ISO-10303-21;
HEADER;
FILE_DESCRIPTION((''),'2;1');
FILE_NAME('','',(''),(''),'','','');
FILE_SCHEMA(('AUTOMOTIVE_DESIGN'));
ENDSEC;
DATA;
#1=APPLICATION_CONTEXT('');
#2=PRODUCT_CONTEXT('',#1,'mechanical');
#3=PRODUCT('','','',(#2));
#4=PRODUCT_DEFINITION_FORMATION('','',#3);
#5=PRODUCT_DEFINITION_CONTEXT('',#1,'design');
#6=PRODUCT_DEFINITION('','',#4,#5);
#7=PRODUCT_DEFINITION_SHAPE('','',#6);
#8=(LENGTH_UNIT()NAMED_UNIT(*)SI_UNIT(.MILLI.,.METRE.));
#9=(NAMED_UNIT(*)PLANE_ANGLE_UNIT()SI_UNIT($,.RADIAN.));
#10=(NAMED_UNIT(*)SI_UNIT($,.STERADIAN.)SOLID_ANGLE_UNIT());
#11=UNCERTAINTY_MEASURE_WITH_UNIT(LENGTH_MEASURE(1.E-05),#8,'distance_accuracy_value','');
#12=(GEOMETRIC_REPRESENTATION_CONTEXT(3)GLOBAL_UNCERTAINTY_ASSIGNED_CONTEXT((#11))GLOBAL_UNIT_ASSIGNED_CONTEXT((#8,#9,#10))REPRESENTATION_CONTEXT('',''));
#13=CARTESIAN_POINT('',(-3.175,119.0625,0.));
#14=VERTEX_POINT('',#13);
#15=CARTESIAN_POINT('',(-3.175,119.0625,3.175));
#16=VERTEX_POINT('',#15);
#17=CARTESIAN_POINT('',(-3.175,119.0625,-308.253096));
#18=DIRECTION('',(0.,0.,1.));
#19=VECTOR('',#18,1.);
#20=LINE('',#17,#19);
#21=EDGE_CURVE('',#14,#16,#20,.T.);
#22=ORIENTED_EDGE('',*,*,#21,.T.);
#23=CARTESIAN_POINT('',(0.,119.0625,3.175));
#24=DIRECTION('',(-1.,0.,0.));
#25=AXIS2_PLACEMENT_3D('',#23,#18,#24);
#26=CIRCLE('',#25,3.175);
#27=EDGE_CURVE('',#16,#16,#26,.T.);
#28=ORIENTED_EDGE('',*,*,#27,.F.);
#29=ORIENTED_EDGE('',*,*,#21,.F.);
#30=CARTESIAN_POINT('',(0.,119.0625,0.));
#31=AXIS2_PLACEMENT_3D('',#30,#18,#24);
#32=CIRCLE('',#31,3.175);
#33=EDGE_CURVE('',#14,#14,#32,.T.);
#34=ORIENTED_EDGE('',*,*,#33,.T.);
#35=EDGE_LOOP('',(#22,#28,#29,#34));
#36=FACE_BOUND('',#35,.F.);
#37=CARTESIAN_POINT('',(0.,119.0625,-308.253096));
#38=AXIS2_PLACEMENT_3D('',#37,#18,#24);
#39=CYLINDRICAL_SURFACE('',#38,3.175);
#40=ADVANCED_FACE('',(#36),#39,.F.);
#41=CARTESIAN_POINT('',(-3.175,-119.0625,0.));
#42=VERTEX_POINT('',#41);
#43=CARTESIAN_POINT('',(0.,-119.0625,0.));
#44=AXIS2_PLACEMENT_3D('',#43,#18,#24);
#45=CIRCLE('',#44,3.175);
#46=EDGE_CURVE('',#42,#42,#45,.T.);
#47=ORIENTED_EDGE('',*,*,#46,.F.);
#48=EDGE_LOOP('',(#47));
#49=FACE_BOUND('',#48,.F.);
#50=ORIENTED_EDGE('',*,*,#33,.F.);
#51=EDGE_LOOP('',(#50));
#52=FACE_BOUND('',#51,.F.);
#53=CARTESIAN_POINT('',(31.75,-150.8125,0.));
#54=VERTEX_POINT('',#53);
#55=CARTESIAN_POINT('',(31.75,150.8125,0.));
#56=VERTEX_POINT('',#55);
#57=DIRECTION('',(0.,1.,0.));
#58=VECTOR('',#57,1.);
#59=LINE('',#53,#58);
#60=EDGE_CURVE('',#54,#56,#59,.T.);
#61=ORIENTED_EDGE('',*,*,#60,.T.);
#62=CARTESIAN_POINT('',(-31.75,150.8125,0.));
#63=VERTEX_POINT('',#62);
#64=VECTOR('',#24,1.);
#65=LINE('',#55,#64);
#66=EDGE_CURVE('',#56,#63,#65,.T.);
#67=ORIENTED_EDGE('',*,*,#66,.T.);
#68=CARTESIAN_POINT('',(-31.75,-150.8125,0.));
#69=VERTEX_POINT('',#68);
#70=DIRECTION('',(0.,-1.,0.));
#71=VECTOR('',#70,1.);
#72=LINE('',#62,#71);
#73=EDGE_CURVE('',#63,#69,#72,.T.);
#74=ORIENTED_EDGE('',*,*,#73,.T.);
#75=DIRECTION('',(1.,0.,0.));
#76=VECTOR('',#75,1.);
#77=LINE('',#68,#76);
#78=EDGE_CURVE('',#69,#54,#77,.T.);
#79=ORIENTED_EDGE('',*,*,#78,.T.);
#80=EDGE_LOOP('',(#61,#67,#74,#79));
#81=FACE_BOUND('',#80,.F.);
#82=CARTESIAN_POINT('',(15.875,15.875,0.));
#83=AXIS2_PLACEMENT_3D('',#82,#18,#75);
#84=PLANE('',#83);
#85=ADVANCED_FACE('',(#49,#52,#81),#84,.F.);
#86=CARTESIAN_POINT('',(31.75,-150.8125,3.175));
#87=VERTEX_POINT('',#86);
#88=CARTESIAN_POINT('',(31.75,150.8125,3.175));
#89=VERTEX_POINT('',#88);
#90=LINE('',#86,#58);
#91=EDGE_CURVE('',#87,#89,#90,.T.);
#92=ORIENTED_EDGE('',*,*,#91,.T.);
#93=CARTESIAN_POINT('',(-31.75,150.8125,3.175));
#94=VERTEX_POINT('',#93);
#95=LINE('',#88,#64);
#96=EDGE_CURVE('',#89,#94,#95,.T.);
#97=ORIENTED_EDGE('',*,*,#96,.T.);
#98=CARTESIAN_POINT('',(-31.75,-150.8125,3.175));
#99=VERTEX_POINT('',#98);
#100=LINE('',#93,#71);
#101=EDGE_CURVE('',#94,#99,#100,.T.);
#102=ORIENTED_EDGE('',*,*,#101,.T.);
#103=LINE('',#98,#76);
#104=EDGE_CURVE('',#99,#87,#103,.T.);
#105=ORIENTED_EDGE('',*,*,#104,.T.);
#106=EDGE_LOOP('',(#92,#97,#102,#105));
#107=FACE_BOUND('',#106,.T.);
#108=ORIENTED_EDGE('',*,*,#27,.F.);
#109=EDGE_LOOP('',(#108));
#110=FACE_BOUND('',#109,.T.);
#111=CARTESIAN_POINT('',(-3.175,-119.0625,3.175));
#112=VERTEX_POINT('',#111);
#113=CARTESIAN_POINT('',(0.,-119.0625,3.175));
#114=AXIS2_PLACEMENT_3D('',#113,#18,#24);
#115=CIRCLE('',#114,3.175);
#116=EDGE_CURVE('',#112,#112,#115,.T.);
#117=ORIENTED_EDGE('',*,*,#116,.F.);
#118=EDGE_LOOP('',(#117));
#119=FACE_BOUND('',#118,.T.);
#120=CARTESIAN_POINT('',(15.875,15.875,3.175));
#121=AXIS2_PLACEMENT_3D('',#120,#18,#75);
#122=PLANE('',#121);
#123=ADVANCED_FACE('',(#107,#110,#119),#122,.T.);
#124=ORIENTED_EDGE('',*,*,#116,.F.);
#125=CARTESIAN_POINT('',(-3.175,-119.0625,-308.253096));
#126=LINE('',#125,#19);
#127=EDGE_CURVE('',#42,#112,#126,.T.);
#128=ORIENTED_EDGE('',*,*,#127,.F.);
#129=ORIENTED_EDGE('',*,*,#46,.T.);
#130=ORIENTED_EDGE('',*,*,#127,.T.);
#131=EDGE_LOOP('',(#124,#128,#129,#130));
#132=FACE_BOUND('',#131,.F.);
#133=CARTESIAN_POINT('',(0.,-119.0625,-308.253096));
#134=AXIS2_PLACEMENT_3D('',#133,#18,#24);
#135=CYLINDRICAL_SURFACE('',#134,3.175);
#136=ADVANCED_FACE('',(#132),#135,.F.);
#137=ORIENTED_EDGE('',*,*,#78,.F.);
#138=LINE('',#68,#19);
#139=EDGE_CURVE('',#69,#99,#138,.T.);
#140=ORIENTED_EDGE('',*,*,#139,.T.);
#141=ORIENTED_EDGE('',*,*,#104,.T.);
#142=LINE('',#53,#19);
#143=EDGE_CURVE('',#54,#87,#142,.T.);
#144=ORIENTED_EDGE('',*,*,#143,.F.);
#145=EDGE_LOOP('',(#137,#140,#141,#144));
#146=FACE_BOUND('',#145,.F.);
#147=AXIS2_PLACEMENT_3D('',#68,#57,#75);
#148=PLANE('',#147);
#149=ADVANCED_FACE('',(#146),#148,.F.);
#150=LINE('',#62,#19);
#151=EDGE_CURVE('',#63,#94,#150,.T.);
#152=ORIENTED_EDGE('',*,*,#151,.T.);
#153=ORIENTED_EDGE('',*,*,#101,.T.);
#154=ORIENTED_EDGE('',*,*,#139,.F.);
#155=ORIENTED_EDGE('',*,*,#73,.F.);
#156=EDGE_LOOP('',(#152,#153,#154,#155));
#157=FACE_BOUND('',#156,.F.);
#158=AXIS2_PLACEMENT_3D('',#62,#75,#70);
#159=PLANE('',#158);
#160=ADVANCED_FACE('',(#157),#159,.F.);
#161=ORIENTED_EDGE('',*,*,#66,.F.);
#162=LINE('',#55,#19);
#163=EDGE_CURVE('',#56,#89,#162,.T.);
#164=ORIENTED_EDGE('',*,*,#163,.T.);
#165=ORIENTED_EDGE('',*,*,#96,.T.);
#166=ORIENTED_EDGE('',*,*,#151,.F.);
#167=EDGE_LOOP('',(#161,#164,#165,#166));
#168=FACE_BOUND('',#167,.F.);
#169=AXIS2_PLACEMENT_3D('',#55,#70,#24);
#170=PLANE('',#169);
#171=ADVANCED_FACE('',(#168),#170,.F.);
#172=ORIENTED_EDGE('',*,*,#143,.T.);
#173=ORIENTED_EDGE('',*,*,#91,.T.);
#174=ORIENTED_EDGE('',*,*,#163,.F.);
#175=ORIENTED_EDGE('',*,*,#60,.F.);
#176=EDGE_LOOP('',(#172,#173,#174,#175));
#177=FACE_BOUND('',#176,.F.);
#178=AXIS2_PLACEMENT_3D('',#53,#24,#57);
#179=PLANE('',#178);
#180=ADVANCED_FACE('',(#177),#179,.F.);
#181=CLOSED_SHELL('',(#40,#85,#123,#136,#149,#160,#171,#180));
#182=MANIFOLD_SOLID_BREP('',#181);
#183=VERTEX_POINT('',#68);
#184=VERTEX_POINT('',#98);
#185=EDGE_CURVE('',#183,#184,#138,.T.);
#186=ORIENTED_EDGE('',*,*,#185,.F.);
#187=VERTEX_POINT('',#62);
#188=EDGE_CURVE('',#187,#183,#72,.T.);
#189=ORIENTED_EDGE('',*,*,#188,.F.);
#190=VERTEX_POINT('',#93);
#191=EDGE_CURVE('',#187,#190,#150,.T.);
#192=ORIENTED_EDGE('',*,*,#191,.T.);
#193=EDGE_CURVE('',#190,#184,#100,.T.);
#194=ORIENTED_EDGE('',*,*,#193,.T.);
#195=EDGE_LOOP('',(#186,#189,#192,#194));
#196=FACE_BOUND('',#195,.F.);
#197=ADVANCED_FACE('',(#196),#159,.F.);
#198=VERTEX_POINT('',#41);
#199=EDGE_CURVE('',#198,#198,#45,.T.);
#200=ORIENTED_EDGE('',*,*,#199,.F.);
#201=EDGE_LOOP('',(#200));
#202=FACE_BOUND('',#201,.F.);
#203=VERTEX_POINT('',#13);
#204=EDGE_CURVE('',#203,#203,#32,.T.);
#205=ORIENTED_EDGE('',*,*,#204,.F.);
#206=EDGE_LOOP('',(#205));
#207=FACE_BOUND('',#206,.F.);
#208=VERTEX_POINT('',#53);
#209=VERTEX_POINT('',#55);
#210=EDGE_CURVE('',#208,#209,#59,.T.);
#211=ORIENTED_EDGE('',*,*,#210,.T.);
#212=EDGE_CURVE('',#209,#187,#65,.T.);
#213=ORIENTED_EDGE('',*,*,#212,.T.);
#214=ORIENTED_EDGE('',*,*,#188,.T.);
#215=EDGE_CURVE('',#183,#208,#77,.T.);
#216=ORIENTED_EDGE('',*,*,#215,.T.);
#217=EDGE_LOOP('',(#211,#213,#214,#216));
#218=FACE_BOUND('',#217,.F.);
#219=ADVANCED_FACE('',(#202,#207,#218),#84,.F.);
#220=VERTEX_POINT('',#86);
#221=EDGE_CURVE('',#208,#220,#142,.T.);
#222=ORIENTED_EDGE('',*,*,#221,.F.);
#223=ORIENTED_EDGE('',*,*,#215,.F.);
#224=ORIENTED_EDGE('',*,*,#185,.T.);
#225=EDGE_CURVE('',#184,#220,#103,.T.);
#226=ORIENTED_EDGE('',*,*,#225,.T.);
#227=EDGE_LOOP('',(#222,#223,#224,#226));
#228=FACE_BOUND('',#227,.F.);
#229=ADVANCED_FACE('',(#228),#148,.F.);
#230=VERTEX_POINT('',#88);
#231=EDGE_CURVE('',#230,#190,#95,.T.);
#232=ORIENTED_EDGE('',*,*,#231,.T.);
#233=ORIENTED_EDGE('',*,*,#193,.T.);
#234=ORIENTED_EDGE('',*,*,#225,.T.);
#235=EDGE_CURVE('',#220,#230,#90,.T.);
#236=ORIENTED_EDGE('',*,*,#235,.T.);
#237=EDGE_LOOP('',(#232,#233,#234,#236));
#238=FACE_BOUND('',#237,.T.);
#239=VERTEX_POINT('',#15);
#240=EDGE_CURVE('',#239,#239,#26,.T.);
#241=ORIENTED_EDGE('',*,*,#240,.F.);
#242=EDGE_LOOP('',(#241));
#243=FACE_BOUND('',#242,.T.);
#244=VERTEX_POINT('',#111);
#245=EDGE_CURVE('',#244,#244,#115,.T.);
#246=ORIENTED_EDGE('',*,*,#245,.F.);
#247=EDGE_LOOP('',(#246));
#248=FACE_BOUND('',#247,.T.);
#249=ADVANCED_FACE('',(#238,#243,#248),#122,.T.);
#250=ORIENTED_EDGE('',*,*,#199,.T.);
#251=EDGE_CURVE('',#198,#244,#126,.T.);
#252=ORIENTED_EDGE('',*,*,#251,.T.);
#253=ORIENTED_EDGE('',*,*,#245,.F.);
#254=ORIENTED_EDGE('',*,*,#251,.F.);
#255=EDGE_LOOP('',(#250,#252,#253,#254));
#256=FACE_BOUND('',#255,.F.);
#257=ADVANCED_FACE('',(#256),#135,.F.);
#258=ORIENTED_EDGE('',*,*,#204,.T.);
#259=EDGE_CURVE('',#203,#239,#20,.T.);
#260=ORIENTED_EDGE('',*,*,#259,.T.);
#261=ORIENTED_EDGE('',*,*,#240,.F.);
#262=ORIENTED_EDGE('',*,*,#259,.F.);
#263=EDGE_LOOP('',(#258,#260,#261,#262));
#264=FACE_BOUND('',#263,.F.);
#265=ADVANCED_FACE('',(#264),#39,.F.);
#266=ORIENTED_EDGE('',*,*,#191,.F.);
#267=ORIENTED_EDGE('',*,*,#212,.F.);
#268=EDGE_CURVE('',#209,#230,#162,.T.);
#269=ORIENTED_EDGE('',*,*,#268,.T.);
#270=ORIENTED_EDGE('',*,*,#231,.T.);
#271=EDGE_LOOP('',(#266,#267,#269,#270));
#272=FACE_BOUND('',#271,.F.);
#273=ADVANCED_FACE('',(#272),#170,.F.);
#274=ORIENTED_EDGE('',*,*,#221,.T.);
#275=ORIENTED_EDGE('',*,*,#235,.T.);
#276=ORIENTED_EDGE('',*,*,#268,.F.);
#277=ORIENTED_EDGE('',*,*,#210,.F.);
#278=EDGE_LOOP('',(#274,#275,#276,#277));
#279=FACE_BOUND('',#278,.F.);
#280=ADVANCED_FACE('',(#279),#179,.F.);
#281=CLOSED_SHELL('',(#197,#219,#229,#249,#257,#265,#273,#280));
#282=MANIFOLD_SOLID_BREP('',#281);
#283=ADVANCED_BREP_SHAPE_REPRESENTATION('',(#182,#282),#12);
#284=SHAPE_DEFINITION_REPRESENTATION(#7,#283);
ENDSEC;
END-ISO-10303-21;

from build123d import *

# Parameters (mm, degrees)
F0_W     = 31.75
F0_H     = 31.75
F1_DEPTH = 3.175
F2_DEPTH = 3.175
F3_D     = 6.35
F3_2_D   = 6.35


# Not quite as in the source:
# - a feature names something its author has since deleted; it is built from what else it names


with BuildPart() as f1:
    # F0 (on Top) → F1 (new body)
    with BuildSketch(Plane.XY):
        Polygon((31.75, -119.0625), (31.75, 150.8125), (0, 150.8125), (0, 119.0625), (0, -119.0625), align=None)
        Polygon((0, 119.0625), (0, 150.8125), (-31.75, 150.8125), (-31.75, -119.0625), (0, -119.0625), align=None)
        with Locations((15.875, -134.9375)):
            Rectangle(F0_W, F0_H)
        with Locations((-15.875, -134.9375)):
            Rectangle(F0_W, F0_H)
    extrude(amount=F1_DEPTH)

    # F3 (through all)
    with Locations(Plane(origin=(0, 0, 0), x_dir=(1, 0, 0), z_dir=(0, 0, -1))):
        with Locations((0, 119.0625), (0, -119.0625)):
            Hole(F3_D / 2)


with BuildPart() as f2:
    # F0 (on Top) → F2 (new body)
    with BuildSketch(Plane.XY):
        Polygon((31.75, -119.0625), (31.75, 150.8125), (0, 150.8125), (0, 119.0625), (0, -119.0625), align=None)
        Polygon((0, 119.0625), (0, 150.8125), (-31.75, 150.8125), (-31.75, -119.0625), (0, -119.0625), align=None)
        with Locations((15.875, -134.9375)):
            Rectangle(F0_W, F0_H)
        with Locations((-15.875, -134.9375)):
            Rectangle(F0_W, F0_H)
    extrude(amount=F2_DEPTH)

    # F3#2 (through all)
    with Locations(Plane(origin=(0, 0, 0), x_dir=(1, 0, 0), z_dir=(0, 0, -1))):
        with Locations((0, 119.0625), (0, -119.0625)):
            Hole(F3_2_D / 2)


solid = Compound([f1.part, f2.part])
